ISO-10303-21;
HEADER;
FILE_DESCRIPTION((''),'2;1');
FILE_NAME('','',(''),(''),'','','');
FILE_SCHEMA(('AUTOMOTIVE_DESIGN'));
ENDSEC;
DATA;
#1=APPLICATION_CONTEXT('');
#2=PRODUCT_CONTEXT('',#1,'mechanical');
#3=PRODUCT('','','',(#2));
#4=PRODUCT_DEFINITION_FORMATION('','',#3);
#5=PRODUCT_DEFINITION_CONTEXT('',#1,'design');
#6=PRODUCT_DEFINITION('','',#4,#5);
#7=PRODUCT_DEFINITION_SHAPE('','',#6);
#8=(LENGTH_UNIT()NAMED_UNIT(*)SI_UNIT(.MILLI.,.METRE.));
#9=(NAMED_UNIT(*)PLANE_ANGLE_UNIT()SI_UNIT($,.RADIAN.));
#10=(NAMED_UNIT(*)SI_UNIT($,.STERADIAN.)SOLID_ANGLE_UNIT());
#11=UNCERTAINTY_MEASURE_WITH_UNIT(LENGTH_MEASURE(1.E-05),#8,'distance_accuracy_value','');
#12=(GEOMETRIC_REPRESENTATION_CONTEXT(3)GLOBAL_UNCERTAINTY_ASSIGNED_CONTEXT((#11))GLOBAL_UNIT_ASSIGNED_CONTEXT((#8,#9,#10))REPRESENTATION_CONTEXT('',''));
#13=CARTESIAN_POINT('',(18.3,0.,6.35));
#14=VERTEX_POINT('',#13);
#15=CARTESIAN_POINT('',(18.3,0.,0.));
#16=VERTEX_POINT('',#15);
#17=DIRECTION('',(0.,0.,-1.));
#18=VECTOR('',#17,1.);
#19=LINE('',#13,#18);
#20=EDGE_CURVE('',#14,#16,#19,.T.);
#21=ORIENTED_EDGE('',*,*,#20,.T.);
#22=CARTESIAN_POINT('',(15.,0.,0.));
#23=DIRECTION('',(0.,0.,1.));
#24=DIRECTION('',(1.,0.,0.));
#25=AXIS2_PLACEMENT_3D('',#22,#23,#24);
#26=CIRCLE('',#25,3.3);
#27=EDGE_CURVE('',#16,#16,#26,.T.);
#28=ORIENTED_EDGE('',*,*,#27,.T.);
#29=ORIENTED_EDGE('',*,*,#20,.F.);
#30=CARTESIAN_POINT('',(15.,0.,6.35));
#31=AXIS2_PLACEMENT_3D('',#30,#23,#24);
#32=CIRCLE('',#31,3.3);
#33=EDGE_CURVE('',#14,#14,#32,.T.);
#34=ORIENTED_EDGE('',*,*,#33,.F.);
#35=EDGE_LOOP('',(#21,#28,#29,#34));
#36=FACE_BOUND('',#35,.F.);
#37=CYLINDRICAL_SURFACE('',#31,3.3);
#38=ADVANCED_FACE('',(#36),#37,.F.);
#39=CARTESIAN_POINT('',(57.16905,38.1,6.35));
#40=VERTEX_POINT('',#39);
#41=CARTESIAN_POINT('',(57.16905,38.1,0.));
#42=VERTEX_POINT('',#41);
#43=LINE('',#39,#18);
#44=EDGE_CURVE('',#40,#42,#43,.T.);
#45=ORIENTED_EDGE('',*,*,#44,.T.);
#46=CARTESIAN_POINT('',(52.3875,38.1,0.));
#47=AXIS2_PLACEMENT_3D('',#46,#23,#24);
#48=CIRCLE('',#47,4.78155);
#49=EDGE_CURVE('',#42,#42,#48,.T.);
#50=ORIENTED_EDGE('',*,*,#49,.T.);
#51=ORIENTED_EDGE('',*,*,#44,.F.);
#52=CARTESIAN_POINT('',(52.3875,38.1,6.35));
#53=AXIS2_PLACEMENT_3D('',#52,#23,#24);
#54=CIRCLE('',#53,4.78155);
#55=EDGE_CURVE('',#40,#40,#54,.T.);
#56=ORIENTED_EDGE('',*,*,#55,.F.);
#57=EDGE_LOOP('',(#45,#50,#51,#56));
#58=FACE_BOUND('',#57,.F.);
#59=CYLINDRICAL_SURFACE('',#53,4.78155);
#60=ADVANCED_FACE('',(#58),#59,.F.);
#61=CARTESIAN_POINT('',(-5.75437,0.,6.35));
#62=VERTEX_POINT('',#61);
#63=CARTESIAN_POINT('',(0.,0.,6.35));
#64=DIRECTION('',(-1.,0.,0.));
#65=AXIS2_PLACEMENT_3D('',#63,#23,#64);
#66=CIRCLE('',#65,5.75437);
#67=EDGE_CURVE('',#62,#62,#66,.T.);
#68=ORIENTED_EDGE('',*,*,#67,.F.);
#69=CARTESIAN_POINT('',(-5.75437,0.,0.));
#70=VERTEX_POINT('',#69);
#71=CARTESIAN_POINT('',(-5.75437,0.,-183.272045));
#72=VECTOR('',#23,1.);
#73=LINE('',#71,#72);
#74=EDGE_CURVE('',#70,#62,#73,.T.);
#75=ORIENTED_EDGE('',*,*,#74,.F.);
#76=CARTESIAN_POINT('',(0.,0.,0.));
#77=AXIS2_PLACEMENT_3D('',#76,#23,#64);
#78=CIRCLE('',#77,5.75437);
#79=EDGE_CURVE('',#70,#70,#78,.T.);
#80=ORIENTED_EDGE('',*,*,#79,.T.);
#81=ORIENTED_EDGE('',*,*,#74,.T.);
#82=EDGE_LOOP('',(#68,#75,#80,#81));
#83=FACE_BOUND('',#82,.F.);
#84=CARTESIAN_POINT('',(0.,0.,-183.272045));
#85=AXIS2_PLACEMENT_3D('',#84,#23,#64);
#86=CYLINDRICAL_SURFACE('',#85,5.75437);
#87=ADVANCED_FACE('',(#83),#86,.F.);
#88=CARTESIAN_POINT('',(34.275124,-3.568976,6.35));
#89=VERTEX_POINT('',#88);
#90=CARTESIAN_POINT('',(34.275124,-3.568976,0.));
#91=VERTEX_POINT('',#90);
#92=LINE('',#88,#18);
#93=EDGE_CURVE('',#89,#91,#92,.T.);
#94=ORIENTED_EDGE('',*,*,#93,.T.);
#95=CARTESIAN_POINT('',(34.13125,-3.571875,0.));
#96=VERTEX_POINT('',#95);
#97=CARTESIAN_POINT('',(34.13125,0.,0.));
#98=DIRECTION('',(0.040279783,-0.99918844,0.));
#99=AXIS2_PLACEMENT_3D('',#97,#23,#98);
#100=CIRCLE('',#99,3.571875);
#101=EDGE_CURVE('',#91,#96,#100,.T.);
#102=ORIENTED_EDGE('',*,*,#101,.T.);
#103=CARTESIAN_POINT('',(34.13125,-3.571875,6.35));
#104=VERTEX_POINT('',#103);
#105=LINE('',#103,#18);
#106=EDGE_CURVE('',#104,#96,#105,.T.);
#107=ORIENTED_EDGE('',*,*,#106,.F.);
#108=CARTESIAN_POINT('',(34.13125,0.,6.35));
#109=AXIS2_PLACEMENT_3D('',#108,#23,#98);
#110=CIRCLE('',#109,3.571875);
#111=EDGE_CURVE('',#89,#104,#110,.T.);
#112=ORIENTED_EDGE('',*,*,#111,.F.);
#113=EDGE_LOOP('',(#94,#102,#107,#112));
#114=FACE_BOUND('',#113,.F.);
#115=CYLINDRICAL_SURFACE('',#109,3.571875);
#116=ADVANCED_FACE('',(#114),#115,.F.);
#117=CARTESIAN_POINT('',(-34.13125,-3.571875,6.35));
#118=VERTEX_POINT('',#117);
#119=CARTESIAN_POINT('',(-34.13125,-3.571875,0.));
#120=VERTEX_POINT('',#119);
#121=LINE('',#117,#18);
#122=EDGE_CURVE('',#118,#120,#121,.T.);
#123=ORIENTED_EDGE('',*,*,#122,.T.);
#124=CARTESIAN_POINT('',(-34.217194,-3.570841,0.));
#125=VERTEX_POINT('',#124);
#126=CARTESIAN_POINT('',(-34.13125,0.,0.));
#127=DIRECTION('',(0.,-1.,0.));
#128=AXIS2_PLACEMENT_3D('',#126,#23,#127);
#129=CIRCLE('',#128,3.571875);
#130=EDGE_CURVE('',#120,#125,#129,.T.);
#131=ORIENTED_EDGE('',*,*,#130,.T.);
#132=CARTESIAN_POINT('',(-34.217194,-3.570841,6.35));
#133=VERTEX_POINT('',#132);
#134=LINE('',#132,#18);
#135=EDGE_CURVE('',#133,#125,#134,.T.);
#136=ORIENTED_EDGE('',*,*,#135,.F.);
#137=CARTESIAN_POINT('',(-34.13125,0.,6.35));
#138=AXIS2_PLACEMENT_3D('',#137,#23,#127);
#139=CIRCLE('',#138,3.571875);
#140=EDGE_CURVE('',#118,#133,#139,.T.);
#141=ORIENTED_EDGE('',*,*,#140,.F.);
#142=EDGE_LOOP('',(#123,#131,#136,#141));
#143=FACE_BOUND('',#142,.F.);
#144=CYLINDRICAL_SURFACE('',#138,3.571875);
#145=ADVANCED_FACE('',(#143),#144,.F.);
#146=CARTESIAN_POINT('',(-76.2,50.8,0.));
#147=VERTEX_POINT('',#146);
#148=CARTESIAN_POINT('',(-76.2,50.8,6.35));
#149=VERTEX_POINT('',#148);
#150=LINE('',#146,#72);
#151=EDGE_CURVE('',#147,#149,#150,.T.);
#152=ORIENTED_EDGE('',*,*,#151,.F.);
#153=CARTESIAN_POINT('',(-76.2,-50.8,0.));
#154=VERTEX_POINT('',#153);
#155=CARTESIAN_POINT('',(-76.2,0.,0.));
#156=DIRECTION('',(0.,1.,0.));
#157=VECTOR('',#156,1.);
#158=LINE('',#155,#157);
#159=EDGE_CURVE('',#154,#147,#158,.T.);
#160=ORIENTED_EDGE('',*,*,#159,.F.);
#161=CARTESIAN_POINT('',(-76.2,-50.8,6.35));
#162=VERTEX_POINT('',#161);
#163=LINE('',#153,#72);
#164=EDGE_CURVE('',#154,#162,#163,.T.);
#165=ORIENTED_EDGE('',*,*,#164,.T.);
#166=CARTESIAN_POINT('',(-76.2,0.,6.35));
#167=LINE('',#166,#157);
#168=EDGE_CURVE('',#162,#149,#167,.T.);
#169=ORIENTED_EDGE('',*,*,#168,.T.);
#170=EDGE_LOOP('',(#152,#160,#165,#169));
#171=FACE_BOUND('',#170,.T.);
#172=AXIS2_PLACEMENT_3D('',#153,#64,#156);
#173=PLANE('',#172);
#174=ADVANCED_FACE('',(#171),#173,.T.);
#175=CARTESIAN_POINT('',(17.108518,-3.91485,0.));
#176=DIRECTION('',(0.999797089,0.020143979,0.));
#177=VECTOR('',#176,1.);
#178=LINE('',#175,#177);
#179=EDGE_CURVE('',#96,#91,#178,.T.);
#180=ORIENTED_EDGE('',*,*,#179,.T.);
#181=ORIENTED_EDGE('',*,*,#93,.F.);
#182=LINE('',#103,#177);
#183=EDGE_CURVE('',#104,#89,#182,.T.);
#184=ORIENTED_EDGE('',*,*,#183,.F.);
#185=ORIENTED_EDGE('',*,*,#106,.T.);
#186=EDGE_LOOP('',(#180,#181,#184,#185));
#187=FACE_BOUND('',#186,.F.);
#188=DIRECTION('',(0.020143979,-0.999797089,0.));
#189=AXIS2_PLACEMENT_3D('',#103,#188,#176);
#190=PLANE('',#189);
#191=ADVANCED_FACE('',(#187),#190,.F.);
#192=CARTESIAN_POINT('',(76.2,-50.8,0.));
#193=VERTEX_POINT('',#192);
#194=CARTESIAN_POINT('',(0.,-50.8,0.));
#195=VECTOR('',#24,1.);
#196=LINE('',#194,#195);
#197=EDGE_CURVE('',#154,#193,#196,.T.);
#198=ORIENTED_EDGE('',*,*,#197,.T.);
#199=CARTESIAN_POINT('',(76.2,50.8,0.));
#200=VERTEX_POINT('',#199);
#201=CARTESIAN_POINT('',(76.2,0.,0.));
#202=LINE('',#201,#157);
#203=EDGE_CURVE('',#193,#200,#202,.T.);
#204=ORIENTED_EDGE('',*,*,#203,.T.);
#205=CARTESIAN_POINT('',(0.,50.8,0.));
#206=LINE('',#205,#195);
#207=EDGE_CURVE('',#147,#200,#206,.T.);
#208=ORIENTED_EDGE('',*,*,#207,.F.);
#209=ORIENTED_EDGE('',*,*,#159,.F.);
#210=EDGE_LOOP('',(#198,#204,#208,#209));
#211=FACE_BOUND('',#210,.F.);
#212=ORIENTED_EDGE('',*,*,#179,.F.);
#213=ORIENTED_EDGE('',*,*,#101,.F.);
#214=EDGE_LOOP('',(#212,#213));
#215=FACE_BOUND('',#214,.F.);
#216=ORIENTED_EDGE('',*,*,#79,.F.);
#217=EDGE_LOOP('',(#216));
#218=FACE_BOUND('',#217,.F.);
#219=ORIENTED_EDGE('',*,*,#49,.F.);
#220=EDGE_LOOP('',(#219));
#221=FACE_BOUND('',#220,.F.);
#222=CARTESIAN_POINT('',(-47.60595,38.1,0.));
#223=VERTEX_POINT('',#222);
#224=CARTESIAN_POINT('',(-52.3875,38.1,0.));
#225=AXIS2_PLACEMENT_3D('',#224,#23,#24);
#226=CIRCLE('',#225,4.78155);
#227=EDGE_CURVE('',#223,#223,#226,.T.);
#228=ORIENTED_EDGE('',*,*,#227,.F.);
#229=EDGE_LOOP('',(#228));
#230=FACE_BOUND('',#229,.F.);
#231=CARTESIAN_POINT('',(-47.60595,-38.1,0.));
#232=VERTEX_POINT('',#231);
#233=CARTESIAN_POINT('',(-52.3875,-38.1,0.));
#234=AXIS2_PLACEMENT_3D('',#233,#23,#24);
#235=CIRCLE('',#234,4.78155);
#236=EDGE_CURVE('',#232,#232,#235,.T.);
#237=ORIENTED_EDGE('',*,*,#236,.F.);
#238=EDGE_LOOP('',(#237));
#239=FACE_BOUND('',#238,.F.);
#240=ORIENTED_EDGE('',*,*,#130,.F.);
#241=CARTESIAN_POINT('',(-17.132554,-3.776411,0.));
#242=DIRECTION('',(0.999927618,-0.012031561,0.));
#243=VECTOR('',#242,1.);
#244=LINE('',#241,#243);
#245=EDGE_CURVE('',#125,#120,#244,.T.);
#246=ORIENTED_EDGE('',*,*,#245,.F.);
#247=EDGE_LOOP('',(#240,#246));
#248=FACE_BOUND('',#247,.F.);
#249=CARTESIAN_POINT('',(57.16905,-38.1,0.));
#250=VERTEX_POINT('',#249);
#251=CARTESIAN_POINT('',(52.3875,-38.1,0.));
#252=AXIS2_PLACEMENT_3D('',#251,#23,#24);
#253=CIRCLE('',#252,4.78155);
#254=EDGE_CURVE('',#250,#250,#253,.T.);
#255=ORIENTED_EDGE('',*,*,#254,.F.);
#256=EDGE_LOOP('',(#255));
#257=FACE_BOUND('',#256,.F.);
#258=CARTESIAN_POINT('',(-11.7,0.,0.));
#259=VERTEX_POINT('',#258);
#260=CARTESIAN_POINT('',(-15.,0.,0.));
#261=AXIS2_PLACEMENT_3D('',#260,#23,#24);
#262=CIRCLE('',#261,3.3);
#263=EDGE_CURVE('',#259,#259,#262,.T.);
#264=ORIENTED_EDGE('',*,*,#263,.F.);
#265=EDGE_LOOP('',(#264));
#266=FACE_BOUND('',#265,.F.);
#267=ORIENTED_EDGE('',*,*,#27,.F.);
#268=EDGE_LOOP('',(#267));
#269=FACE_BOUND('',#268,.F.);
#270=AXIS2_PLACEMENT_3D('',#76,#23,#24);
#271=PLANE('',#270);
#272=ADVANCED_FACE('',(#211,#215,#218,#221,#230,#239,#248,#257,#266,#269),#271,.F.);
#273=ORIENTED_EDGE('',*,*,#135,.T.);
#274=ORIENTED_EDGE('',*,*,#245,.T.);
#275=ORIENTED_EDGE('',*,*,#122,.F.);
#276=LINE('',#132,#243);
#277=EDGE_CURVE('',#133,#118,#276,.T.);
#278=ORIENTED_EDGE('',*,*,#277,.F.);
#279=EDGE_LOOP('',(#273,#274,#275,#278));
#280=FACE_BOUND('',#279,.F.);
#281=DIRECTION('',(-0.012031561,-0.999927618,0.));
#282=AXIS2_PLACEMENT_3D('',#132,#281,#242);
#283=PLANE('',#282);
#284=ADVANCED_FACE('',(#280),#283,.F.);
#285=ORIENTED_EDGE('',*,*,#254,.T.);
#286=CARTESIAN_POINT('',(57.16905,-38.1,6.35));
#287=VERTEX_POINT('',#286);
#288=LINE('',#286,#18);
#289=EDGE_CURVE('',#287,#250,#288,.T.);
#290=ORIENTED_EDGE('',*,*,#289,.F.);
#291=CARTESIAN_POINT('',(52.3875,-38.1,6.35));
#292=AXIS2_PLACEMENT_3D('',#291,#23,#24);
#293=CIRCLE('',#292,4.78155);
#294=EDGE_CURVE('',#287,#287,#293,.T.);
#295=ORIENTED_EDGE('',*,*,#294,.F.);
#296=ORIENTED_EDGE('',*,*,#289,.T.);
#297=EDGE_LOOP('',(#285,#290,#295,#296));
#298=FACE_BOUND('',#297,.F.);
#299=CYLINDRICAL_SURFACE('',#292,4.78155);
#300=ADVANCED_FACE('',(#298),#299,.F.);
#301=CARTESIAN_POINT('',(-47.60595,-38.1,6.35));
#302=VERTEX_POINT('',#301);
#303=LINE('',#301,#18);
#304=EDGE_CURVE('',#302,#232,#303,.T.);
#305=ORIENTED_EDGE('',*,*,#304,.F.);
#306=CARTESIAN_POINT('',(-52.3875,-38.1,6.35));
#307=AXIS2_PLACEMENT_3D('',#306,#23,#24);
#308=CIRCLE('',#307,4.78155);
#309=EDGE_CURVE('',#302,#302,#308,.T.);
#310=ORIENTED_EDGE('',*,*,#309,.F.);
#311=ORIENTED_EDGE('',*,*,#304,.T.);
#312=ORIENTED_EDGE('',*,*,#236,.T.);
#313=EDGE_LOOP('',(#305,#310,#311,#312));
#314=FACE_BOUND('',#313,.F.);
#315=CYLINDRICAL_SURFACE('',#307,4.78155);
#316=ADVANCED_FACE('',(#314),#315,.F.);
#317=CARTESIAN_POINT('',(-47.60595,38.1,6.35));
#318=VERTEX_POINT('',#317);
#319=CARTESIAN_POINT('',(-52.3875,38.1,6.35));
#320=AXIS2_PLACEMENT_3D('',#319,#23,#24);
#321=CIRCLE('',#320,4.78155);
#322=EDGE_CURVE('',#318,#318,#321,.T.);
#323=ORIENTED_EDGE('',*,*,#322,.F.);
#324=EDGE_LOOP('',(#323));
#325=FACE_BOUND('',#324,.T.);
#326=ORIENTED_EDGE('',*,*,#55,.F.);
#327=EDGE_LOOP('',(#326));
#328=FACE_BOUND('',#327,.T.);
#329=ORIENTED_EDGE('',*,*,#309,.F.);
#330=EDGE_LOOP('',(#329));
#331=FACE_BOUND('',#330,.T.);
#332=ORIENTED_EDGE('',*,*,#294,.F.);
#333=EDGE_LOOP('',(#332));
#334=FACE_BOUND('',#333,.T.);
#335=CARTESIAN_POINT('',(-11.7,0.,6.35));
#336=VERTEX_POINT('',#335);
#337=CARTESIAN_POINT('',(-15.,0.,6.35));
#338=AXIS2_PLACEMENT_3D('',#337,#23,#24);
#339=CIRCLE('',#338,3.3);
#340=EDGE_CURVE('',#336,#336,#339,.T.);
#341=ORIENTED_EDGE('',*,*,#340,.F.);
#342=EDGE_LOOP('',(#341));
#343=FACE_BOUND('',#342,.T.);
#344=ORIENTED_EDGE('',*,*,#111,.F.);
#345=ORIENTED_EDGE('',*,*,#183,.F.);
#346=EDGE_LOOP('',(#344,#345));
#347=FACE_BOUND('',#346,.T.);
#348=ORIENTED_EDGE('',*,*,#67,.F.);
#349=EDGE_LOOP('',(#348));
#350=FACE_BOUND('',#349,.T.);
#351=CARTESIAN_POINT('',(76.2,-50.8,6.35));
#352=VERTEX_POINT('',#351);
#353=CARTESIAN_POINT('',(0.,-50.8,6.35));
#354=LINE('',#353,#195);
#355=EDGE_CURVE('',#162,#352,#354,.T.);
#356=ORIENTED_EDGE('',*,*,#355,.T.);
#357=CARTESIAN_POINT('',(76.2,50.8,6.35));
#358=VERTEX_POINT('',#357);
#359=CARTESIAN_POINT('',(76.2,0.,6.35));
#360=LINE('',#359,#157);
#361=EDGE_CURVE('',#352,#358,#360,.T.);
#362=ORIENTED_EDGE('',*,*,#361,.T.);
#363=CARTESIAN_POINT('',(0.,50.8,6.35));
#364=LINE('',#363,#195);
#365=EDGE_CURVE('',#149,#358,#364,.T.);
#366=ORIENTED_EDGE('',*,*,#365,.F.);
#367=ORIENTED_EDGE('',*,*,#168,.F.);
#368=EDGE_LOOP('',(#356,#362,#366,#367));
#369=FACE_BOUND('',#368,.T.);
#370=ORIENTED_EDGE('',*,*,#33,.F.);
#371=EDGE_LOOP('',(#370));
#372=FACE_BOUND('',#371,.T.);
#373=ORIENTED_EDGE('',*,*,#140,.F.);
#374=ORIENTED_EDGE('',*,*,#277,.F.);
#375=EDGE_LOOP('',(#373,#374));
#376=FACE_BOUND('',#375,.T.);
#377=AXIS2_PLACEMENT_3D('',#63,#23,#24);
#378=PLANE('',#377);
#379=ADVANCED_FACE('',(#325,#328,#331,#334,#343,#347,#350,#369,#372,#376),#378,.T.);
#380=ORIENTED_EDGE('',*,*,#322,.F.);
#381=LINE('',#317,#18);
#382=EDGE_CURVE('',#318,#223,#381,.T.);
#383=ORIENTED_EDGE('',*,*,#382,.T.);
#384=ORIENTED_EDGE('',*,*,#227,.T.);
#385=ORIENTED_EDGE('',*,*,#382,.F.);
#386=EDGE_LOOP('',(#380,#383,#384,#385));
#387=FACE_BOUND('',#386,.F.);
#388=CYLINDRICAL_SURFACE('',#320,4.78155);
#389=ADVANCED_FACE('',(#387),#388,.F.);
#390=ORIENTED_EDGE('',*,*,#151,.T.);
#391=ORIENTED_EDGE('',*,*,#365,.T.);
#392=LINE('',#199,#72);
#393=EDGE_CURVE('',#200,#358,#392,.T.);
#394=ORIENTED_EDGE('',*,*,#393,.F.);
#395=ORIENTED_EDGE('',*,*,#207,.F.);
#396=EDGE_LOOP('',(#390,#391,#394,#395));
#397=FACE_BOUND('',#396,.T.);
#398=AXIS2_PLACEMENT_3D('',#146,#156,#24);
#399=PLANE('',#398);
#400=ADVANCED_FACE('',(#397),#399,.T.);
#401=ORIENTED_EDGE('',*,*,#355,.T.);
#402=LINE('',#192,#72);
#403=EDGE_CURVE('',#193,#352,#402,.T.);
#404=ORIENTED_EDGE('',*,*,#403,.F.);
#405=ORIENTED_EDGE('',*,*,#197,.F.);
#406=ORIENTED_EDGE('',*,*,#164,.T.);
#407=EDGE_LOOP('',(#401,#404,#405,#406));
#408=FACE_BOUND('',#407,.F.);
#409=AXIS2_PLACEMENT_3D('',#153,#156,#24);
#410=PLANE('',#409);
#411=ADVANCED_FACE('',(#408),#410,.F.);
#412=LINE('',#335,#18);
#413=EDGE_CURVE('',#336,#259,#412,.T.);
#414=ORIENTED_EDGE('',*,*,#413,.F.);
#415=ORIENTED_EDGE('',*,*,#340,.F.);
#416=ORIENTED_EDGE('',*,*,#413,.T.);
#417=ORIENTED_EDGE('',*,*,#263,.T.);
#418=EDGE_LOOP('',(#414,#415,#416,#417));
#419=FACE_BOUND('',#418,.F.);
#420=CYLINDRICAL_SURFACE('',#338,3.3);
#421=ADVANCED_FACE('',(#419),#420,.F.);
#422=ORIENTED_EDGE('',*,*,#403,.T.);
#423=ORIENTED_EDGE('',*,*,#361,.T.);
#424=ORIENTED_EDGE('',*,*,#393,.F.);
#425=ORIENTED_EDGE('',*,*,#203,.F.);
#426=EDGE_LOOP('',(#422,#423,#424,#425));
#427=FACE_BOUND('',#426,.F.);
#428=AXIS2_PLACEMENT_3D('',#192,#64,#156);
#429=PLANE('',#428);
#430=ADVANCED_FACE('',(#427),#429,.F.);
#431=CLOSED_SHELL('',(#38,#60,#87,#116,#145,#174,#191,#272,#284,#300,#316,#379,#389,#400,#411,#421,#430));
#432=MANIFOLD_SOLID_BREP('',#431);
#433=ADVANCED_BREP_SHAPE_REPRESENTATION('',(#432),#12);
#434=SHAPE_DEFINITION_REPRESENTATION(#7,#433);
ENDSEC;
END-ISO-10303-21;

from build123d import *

# Parameters (mm, degrees)
F0_W     = 152.4
F0_H     = 101.6
F1_DEPTH = 6.35
F2_R     = 4.78155
F3_DEPTH = 6.35
F5_DEPTH = 6.351
F6_R     = 3.3
F7_DEPTH = 6.351
F9_D     = 11.50874


with BuildPart() as f1:
    # F0 (on Top) → F1 (new body)
    with BuildSketch(Plane.XY):
        Rectangle(F0_W, F0_H)
    extrude(amount=F1_DEPTH)

    # F2 (on face) → F3 (cut, through all)
    with BuildSketch(Plane.XY.offset(6.35)):
        with Locations((-52.3875, 38.1)):
            Circle(F2_R)
        with Locations((52.3875, 38.1)):
            Circle(F2_R)
        with Locations((-52.3875, -38.1)):
            Circle(F2_R)
        with Locations((52.3875, -38.1)):
            Circle(F2_R)
    extrude(amount=-F3_DEPTH, mode=Mode.SUBTRACT)

    # F4 (on face) → F5 (cut, through all)
    with BuildSketch(Plane.XY.offset(6.35)):
        with BuildLine():
            Line((-34.2171942442, -3.5708408817), (-34.13125, -3.571875))
            ThreePointArc((-34.13125, -3.571875), (-34.0882747673, 3.5716164611), (-34.2171942442, -3.5708408817))
        make_face()
        with BuildLine():
            Line((34.13125, -3.571875), (34.2751243473, -3.56897621))
            ThreePointArc((34.2751243473, -3.56897621), (34.0592982266, 3.571150229), (34.13125, -3.571875))
        make_face()
    extrude(amount=-F5_DEPTH, mode=Mode.SUBTRACT)

    # F6 (on face) → F7 (cut, through all)
    with BuildSketch(Plane.XY.offset(6.35)):
        with Locations((-15, 0)):
            Circle(F6_R)
        with Locations((15, 0)):
            Circle(F6_R)
    extrude(amount=-F7_DEPTH, mode=Mode.SUBTRACT)

    # F9 (through all)
    with Locations(Plane(origin=(0, 0, 0), x_dir=(1, 0, 0), z_dir=(0, 0, -1))):
        with Locations((0, 0)):
            Hole(F9_D / 2)


solid = f1.part
